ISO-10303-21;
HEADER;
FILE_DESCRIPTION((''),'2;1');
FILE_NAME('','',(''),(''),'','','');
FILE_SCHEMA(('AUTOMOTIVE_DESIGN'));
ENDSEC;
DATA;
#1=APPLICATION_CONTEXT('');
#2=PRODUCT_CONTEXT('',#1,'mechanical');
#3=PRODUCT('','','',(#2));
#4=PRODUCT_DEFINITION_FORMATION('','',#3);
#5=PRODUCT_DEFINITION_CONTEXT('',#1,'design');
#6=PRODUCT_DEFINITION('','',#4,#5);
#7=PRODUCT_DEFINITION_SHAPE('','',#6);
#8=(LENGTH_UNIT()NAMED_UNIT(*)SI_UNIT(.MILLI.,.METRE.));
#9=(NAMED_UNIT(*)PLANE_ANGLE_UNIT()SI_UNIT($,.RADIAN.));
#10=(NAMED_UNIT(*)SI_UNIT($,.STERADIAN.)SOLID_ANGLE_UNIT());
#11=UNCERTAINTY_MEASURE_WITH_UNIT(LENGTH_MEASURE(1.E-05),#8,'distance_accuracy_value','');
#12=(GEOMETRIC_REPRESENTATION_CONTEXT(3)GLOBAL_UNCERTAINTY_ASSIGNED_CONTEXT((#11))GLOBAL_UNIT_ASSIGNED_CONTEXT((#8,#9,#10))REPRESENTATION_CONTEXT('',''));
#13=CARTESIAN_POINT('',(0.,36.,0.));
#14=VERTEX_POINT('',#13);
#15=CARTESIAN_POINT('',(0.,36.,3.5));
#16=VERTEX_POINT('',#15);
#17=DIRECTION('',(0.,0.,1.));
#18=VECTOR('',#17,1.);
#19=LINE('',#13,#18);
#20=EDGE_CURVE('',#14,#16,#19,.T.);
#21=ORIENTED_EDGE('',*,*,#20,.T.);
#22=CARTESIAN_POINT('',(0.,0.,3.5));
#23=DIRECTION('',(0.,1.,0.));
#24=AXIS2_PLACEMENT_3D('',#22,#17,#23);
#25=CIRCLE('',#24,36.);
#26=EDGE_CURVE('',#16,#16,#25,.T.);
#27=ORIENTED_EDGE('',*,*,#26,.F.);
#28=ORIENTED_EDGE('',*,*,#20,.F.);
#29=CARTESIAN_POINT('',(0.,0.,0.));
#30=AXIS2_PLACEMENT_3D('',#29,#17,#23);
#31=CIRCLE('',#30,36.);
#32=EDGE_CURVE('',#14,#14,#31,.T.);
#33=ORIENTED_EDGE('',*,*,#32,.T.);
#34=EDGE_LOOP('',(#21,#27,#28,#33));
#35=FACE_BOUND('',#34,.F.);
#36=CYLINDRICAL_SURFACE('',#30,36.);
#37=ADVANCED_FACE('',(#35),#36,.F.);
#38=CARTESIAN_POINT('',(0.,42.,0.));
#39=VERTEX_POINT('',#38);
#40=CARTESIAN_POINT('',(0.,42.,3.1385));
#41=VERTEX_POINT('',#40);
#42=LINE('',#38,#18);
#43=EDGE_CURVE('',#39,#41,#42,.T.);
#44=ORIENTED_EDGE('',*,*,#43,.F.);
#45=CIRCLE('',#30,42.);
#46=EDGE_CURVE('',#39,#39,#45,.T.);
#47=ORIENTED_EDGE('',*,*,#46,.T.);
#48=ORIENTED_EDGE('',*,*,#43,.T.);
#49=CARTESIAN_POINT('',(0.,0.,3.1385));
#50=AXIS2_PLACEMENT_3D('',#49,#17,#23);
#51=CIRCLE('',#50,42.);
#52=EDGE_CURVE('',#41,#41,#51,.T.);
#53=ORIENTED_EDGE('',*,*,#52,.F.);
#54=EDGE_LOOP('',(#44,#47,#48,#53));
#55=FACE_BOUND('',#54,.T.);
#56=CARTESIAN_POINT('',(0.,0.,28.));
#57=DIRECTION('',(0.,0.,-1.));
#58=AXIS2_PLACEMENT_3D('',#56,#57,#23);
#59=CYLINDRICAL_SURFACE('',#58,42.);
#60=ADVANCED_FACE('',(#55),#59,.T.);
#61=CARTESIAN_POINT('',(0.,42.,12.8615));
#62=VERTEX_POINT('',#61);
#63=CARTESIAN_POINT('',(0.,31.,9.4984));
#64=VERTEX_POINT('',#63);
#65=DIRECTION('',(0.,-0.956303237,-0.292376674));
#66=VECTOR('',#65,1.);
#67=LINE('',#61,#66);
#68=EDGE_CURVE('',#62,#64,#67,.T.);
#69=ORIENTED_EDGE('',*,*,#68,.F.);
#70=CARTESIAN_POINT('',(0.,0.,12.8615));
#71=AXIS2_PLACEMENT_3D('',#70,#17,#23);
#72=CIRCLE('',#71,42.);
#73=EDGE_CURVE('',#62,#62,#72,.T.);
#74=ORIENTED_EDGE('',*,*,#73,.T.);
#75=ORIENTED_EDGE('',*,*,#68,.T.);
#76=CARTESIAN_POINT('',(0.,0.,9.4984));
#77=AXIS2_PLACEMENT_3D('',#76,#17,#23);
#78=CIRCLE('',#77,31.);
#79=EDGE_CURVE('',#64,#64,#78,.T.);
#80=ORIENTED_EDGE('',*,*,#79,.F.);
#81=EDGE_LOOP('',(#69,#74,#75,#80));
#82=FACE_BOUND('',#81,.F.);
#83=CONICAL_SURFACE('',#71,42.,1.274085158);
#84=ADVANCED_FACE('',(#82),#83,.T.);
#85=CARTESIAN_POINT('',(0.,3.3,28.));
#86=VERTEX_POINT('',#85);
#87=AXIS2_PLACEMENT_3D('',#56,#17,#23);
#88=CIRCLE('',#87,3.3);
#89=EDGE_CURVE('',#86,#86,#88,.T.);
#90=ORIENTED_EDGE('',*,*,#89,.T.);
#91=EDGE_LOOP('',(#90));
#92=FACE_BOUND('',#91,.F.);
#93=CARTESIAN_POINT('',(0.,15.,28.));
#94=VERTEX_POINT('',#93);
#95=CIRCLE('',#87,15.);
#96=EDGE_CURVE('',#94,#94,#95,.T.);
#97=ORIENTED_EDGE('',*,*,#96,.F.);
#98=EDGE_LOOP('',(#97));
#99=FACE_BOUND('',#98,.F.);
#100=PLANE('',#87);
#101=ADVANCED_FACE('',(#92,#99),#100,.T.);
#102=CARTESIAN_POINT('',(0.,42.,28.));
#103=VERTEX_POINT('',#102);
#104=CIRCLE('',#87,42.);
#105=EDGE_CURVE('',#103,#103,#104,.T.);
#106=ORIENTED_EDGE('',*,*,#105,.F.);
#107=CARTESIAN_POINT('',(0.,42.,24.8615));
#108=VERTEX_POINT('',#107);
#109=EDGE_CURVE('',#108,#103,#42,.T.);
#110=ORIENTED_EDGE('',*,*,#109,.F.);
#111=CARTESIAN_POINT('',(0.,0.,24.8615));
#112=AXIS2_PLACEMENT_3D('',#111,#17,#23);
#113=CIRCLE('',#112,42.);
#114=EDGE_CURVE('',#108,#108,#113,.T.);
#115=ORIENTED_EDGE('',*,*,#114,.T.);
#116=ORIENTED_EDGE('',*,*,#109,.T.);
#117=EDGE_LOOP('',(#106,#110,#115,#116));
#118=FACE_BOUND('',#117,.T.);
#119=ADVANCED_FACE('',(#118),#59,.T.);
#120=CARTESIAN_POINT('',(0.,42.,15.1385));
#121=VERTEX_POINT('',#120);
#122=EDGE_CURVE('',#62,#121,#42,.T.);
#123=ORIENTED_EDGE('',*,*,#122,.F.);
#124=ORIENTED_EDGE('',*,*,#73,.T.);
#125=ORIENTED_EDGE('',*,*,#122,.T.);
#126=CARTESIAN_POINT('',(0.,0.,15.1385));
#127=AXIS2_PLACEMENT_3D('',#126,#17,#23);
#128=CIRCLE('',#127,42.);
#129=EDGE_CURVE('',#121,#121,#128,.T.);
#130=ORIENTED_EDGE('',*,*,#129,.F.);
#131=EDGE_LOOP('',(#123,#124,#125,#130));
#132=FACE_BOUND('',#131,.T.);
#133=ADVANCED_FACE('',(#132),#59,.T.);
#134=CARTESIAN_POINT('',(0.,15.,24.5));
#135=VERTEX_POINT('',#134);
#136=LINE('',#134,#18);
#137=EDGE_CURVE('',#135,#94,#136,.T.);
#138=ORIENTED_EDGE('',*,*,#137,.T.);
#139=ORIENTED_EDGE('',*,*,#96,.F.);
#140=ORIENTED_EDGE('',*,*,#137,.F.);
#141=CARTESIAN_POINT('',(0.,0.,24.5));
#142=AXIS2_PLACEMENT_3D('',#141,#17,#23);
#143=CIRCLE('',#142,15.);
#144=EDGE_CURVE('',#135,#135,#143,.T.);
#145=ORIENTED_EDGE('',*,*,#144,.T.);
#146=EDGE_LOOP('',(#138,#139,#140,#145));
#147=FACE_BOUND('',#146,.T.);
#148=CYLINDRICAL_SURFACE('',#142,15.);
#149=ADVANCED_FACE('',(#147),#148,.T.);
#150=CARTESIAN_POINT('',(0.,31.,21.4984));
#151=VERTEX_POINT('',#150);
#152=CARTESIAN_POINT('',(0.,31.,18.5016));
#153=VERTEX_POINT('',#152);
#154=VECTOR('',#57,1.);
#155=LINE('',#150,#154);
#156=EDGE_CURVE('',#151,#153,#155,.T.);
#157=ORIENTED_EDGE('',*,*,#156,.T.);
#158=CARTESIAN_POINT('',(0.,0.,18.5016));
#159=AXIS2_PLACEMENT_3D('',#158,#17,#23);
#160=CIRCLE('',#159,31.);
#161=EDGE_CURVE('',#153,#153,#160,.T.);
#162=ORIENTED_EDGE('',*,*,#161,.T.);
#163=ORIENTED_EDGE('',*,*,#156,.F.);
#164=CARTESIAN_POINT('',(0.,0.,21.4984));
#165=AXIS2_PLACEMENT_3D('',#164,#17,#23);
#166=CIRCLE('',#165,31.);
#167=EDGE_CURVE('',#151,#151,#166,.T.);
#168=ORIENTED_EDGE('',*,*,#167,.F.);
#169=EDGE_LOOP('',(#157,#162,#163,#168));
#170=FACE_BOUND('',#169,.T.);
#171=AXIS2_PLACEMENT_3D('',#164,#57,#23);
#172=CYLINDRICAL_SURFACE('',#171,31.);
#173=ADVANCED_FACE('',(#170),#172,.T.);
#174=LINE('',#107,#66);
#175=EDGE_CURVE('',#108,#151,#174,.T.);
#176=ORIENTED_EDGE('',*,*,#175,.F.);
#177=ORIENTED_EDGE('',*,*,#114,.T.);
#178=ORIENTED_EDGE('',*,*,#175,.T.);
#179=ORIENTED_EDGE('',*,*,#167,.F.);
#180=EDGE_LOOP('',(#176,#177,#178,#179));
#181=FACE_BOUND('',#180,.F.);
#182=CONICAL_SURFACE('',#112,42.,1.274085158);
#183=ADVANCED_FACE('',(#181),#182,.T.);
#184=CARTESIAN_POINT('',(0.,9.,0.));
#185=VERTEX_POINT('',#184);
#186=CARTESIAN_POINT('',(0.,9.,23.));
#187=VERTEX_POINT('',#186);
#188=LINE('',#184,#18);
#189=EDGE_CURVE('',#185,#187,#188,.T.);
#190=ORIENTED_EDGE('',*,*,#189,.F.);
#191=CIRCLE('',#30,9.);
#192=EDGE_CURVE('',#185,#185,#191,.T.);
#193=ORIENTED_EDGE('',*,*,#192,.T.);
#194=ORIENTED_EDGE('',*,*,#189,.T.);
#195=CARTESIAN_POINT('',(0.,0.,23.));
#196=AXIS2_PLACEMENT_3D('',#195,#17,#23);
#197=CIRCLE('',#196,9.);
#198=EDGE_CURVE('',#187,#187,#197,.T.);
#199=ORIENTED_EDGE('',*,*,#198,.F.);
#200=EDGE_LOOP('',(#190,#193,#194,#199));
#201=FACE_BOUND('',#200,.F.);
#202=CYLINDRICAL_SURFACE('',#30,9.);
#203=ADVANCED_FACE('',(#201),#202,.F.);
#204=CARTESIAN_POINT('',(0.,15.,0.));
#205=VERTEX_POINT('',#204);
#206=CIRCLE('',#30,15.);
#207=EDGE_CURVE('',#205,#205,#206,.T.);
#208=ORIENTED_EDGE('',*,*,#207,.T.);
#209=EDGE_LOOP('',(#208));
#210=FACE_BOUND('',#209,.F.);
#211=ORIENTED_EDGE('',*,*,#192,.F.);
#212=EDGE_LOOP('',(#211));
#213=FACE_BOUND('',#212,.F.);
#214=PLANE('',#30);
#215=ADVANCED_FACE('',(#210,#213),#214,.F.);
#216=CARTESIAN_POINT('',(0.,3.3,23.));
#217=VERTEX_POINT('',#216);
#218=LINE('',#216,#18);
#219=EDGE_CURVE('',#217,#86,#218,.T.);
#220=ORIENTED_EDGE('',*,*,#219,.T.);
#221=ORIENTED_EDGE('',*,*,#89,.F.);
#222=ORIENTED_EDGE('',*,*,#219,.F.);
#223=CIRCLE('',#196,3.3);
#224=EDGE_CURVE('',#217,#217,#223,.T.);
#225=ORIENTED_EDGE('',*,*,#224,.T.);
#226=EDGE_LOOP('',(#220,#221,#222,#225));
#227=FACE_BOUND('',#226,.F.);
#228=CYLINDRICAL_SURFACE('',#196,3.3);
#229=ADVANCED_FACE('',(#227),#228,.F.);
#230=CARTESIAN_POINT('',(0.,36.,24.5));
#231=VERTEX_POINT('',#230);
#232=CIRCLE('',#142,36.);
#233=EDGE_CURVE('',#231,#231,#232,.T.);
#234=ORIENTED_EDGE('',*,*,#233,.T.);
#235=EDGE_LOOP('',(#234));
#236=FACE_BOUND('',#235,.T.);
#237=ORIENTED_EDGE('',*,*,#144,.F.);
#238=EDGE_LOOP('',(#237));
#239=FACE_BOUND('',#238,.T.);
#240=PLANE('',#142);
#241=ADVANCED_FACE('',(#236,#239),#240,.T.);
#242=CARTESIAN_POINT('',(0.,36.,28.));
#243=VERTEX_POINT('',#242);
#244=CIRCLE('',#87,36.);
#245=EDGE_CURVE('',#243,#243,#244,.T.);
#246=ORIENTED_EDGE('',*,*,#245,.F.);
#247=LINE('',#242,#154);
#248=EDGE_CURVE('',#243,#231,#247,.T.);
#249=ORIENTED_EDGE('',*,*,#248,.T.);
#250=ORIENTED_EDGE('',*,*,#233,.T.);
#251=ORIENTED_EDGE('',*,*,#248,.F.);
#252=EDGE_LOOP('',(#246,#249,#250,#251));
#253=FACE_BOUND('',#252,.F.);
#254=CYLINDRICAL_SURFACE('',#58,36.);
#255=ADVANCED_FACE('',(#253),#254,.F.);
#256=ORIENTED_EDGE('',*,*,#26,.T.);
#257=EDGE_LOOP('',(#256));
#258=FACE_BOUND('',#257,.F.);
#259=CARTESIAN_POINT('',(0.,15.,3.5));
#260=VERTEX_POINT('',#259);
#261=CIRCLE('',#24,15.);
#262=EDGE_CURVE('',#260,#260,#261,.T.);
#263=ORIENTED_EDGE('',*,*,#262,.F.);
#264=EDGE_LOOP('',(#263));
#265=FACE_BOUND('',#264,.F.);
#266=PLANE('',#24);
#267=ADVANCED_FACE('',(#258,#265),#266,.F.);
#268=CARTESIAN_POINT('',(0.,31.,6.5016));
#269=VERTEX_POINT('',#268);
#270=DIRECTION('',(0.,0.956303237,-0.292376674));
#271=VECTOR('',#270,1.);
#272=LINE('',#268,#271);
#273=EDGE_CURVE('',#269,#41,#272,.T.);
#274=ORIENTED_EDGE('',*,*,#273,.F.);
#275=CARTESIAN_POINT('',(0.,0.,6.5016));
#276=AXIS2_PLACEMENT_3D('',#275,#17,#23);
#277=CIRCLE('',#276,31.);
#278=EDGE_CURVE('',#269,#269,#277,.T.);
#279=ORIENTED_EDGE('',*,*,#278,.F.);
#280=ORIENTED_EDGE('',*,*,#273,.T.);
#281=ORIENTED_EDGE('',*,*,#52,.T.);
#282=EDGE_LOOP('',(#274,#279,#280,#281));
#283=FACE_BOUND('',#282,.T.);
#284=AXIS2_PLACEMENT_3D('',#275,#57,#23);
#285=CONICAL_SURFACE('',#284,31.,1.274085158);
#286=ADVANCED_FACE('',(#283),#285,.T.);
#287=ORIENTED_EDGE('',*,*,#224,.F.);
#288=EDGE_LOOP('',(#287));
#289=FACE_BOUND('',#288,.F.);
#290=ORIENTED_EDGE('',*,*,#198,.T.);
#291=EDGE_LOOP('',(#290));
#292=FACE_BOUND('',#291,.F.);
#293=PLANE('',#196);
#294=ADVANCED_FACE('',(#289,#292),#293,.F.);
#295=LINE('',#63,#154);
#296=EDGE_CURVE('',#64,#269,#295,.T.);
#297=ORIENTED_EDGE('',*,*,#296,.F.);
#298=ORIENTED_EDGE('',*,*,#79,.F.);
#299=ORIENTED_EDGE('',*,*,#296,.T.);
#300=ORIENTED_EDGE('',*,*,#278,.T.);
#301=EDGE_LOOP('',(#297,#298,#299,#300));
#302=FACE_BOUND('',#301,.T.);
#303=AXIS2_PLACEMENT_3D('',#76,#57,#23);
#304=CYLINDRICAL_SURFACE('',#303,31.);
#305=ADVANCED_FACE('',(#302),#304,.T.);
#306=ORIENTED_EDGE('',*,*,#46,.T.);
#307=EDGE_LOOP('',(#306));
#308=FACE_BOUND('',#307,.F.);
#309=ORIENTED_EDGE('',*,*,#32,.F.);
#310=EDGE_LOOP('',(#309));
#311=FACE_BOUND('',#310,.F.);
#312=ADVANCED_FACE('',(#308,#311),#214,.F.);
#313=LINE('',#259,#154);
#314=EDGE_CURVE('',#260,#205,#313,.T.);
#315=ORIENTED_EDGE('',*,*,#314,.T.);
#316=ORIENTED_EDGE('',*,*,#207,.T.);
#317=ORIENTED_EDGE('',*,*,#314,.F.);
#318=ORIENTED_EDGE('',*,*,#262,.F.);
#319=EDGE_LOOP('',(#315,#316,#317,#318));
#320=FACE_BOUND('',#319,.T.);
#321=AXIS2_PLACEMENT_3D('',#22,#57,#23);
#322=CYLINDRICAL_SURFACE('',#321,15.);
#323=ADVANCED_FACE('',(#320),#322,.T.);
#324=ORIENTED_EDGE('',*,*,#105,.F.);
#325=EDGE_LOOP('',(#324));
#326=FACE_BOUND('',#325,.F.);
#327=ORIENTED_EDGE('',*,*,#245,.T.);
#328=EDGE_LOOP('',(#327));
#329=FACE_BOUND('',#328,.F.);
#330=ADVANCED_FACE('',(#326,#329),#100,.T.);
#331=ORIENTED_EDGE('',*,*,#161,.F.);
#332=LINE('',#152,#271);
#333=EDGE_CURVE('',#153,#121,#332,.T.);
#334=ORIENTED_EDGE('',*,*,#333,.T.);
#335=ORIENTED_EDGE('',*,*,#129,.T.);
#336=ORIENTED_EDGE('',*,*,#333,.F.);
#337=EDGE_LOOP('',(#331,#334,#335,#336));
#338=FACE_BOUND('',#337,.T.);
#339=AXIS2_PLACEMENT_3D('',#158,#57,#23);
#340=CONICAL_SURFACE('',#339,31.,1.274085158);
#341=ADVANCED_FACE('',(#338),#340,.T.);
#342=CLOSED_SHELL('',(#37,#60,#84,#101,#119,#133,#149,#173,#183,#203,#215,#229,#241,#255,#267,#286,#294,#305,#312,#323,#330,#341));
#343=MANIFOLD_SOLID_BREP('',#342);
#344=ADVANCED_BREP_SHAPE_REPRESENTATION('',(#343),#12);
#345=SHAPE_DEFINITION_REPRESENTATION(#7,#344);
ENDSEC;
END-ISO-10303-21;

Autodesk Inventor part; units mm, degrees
ref_plane "YZ Plane" through (0, 0, 0) normal (1, 0, 0) x (0, 1, 0)
ref_plane "XZ Plane" through (0, 0, 0) normal (0, 1, 0) x (-1, 0, 0)
sketch "Main Sketch" plane through (0, 0, 0) normal (1, 0, 0) x (0, 1, 0)
  line L0 (0, 28) -> (42, 28)
  line L1 (42, 28) -> (42, 12.8615)
  line L2 (42, 12.8615) -> (31, 9.4984)
  line L3 (31, 9.4984) -> (31, 6.5016)
  line L4 (31, 6.5016) -> (42, 3.1385)
  line L5 (42, 3.1385) -> (42, 0)
  line L6 (42, 0) -> (0, 0)
  line L7 (40, 12.25) -> (40, 3.75) construction
  line L8 (31, 8) -> (40, 8) construction
  line L9 (42, 12.8615) -> (42, 3.1385)
  line L10 (0, -5.6) -> (0, 33.6) projected
  line L11 (0, 0) -> (0, 28)
  line L12 (36, 0) -> (36, 3.5)
  line L13 (36, 3.5) -> (15, 3.5)
  line L14 (15, 3.5) -> (15, 0)
  line L15 (36, 28) -> (36, 24.5)
  line L16 (36, 24.5) -> (15, 24.5)
  line L17 (15, 24.5) -> (15, 28)
  dimension "d0" = 8.5
  dimension "d1" = 34
  dimension "d2" = 2
  dimension "d6" = 28
  dimension "d21" = 80
  dimension "d25" = 11
  dimension "d27" = 8
  dimension "d35" = 6
  dimension "d36" = 15
  dimension "d37" = 3.5
ref_plane "Belt Plane" through (0, 31, 8) normal (0, 0, 1) x (1, 0, 0)
revolve "Body" add sketch "Main Sketch" angle 360 about axis through (0, 0, -10) along (0, 0, 1) contours L0 L17 L16 L15 L1 L2 L3 L4 L5 L6 L12 L13 L14 L10 | L9 L4 L3 L2
revolve "Groove" cut sketch "Main Sketch" angle 360 about axis through (0, 0, -10) along (0, 0, 1) contours L9 L4 L3 L2
fillet "Fillet External" [suppressed]
fillet "Fillet Internal" [suppressed]
pattern_linear "Groove Pattern" count 2 spacing 12 along (0, 0, 1) of "Groove"
sketch "Sketch2" plane through (0, 0, 0) normal (0, 0, -1) x (-1, 0, 0)
  circle A0 centre (0, 0) radius 42 projected
hole "Hole1" at (0, 0, 0) direction (0, 0, 1) diameter 6.6 end through all counterbore diameter 18 counterbore depth 23
equation "\"d0\" = da_Bw"
equation "\"d1\" = da_Alfa"
equation "\"d2\" = da_c"
equation "\"d21\" = da_Dw"
equation "\"d25\" = da_Hd"
equation "\"d27\" = da_Se"
equation "\"da_r1\" = 0"
equation "\"da_r2\" = 0"
equation "\"d18\" = da_Sg"
equation "\"d5\" = da_Se"
equation "\"da_Bw\" = 8.5"
equation "\"da_Alfa\" = 34deg"
equation "\"da_c\" = 2"
equation "\"da_Dw\" = 80"
equation "\"da_Hd\" = 11"
equation "\"da_Se\" = 8"
equation "\"da_Sg\" = 12"
properties part number "PWTR-0096" material "Stainless Steel"
